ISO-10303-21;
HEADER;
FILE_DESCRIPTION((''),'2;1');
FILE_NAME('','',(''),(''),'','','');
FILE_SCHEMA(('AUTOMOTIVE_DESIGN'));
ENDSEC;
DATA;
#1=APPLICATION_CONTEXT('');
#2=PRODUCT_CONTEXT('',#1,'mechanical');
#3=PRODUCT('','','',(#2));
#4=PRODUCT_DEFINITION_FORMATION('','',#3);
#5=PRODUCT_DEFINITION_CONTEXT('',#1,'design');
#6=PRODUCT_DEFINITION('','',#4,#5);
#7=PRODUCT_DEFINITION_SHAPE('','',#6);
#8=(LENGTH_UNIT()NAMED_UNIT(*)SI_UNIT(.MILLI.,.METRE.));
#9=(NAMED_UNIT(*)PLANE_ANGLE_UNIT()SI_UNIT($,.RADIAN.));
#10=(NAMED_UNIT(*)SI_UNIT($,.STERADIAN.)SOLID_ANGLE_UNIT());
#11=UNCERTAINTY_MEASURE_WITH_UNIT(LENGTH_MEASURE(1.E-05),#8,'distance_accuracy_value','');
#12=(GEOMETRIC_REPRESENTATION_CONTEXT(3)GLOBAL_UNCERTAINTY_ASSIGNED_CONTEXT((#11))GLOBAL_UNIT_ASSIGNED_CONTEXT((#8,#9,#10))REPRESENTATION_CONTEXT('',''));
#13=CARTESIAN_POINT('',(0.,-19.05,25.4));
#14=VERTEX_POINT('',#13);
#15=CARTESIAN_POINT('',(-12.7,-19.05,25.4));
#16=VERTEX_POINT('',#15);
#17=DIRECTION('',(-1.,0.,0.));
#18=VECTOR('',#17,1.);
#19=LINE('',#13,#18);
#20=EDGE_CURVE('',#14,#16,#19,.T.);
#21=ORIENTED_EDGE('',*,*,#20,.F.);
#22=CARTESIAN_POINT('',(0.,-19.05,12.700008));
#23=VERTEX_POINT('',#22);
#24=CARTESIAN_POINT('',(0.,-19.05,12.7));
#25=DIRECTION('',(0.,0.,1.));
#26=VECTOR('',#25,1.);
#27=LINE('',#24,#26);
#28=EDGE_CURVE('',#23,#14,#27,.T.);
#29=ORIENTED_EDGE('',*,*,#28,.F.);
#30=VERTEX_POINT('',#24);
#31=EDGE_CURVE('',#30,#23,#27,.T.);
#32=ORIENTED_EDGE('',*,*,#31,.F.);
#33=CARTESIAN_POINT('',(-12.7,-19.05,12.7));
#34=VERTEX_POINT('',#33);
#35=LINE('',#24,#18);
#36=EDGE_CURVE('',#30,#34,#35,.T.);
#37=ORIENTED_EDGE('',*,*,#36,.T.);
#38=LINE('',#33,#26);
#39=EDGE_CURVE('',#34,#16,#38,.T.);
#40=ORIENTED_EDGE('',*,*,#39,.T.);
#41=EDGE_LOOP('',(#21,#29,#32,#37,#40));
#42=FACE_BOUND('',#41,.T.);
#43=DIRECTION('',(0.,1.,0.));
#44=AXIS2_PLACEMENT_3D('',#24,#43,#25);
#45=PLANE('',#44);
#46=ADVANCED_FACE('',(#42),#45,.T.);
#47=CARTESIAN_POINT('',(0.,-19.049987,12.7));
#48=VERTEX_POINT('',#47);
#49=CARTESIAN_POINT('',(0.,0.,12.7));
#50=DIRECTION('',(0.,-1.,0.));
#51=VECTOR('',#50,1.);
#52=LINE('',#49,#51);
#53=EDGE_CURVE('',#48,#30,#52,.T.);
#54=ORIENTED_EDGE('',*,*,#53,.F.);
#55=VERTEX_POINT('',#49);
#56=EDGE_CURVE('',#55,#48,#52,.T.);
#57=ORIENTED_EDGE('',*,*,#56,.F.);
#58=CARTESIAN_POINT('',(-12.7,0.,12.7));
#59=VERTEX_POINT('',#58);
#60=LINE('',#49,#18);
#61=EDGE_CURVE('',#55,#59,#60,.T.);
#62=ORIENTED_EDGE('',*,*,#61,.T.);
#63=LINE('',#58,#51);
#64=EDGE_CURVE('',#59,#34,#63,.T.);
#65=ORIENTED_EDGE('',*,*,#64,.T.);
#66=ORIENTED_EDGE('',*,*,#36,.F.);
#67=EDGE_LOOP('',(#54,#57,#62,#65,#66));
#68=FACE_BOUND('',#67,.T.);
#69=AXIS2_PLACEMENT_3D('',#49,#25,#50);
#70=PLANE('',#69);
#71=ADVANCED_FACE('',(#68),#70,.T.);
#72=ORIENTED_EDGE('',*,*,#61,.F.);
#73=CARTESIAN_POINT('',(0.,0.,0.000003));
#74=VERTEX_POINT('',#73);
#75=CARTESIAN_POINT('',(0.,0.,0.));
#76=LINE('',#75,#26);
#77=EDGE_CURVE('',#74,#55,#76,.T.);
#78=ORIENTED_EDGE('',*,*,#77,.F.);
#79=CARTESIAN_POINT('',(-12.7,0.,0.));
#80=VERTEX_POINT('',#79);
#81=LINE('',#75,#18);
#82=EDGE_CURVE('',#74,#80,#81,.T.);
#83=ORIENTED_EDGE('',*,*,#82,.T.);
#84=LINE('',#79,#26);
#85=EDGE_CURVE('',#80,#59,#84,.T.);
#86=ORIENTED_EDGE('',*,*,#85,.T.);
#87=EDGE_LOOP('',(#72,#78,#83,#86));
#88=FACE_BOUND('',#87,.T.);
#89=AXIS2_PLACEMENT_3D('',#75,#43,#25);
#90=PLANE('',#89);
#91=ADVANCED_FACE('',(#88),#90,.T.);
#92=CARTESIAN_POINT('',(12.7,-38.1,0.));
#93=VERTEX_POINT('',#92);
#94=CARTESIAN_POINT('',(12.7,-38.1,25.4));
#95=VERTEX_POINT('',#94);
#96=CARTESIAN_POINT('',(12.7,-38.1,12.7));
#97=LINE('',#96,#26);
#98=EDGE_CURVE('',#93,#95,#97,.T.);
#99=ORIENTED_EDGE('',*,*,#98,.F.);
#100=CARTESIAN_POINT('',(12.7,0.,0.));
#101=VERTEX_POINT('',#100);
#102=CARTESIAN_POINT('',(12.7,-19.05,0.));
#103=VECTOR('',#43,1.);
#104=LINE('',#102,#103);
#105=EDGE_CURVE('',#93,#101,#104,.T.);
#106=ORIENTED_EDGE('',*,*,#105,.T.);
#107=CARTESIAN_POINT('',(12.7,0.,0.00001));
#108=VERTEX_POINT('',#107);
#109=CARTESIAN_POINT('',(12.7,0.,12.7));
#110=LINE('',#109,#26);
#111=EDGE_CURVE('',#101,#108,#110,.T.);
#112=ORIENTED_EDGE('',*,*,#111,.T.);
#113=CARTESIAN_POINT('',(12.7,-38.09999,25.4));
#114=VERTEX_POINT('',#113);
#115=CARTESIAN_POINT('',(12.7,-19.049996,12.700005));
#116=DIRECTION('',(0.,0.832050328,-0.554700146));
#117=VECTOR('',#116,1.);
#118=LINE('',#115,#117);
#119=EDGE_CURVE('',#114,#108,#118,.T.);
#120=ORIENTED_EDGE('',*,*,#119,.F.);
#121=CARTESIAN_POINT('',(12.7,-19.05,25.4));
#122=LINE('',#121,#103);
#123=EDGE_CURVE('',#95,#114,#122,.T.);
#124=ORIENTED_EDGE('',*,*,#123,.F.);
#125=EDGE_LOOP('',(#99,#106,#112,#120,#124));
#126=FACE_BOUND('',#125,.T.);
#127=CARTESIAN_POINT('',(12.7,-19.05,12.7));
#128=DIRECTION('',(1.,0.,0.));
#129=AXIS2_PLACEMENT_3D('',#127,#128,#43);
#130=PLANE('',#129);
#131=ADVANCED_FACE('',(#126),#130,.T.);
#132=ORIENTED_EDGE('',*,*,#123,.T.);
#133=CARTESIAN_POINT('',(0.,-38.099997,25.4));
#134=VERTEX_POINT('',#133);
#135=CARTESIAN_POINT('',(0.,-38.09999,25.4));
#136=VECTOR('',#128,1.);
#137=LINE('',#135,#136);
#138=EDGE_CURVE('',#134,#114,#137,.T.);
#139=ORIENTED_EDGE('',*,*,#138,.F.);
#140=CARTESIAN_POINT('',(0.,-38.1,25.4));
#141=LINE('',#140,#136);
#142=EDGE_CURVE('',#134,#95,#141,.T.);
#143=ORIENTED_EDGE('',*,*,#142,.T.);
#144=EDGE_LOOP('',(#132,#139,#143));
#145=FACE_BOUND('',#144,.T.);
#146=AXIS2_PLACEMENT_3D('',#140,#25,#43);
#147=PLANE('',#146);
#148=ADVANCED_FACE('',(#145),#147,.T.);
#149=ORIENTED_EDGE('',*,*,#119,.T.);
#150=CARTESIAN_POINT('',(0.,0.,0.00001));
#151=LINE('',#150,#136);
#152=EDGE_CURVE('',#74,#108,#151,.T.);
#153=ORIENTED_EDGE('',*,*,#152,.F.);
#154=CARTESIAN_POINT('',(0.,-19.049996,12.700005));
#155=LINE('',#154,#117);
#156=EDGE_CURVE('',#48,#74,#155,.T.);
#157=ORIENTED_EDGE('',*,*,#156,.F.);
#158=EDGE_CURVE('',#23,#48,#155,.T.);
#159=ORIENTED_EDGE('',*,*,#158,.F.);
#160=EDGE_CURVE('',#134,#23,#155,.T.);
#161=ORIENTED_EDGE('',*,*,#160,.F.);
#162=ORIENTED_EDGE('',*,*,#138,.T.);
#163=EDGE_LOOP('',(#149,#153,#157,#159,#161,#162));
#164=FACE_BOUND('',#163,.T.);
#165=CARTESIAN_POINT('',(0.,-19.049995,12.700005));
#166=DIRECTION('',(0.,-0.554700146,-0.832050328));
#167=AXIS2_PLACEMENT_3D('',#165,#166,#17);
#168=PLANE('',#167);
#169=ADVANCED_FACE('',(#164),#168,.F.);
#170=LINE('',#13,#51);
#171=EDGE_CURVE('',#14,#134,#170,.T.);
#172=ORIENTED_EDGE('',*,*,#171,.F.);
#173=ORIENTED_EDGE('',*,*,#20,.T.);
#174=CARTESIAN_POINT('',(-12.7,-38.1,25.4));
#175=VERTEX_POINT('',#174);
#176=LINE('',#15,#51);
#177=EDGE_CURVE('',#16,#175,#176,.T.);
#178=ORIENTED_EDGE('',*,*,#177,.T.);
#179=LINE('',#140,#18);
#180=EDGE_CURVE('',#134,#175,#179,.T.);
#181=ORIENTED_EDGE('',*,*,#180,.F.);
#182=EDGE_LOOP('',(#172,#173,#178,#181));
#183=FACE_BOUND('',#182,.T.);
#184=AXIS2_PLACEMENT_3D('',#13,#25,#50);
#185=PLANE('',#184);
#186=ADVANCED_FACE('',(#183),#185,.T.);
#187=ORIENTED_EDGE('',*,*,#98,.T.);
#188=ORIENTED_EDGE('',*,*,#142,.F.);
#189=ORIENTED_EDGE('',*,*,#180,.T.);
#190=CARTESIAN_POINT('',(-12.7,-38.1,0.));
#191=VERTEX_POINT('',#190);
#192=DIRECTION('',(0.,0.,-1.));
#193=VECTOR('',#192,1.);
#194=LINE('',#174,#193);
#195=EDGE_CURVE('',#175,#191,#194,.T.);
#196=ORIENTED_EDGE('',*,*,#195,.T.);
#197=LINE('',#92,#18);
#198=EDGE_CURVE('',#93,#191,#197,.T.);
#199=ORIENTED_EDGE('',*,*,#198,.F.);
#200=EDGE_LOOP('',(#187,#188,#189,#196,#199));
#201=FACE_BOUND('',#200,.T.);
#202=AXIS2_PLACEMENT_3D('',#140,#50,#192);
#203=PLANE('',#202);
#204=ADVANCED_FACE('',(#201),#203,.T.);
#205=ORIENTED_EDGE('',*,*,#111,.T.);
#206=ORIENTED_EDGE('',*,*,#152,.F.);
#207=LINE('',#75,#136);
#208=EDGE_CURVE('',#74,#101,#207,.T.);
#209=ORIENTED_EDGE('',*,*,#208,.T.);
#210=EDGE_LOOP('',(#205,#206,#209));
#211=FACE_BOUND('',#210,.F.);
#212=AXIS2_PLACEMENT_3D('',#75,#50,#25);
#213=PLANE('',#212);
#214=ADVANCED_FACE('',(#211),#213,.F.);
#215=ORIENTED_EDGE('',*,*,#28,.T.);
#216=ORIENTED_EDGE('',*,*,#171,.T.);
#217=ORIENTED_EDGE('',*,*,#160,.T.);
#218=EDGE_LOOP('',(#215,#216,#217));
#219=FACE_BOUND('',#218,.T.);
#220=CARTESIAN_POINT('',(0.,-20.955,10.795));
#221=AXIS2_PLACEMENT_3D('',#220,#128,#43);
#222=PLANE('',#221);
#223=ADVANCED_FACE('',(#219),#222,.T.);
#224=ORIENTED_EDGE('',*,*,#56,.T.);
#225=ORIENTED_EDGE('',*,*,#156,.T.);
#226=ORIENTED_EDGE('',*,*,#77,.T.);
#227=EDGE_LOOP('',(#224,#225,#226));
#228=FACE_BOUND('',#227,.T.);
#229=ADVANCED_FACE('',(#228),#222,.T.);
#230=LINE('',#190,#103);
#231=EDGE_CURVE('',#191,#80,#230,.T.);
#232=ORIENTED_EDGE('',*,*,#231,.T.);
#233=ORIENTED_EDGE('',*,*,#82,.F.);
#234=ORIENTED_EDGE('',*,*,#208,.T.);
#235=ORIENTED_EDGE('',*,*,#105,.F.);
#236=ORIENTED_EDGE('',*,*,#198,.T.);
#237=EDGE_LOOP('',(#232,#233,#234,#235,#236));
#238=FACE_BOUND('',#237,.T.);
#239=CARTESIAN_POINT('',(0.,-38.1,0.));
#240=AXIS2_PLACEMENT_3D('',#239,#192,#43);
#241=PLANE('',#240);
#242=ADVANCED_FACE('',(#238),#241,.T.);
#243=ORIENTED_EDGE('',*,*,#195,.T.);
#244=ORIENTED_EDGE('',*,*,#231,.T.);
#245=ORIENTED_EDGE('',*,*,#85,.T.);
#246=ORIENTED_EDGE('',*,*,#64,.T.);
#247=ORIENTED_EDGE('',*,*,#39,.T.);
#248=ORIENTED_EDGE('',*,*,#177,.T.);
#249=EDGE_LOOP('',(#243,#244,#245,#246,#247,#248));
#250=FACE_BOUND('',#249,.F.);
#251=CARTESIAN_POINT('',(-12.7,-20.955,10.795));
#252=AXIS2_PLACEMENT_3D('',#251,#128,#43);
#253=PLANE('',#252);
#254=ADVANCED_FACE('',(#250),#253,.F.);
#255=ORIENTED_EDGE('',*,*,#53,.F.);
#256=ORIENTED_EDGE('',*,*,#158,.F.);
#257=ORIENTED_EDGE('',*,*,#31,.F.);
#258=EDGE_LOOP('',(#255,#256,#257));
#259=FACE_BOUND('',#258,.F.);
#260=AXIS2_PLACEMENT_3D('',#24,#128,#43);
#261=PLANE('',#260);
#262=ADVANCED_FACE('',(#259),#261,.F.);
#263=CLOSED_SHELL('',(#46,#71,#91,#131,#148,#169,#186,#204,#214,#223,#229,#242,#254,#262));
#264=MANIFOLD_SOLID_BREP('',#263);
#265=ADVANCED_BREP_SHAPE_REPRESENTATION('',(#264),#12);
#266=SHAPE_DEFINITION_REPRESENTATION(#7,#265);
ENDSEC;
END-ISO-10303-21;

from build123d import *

# Parameters (mm, degrees)
F0_W     = 38.1
F0_H     = 25.4
F1_DEPTH = 12.7
F2_SIZE2 = 25.39999
F2_SIZE  = 38.09999
F4_DEPTH = 12.7


# Not quite as in the source:
# - a fillet or chamfer is up to 0.001 mm smaller than in the source, because OpenCascade refuses the exact size


with BuildPart() as f1:
    # F0 (on Right) → F1 (new body)
    with BuildSketch(Plane.YZ):
        with Locations((-19.05, 12.7)):
            Rectangle(F0_W, F0_H)
    extrude(amount=F1_DEPTH)

    # F2 (size 38.1 and 25.4 in the source; OpenCascade refuses exactly that, so slightly less here)
    f2_edges = [f1.edges().sort_by_distance(p)[0] for p in [
        (6.35, 0, 25.4),
    ]]
    f2_side = f1.faces().sort_by_distance((6.35, -19.05, 25.4))[0]
    chamfer(f2_edges, length=F2_SIZE, length2=F2_SIZE2, reference=f2_side)

    # F3 (on Right) → F4 (join)
    with BuildSketch(Plane.YZ):
        Polygon((-38.1, 0), (0, 0), (0, 12.7), (-19.05, 12.7), (-19.05, 25.4), (-38.1, 25.4), align=None)
    extrude(amount=-F4_DEPTH)


solid = f1.part
